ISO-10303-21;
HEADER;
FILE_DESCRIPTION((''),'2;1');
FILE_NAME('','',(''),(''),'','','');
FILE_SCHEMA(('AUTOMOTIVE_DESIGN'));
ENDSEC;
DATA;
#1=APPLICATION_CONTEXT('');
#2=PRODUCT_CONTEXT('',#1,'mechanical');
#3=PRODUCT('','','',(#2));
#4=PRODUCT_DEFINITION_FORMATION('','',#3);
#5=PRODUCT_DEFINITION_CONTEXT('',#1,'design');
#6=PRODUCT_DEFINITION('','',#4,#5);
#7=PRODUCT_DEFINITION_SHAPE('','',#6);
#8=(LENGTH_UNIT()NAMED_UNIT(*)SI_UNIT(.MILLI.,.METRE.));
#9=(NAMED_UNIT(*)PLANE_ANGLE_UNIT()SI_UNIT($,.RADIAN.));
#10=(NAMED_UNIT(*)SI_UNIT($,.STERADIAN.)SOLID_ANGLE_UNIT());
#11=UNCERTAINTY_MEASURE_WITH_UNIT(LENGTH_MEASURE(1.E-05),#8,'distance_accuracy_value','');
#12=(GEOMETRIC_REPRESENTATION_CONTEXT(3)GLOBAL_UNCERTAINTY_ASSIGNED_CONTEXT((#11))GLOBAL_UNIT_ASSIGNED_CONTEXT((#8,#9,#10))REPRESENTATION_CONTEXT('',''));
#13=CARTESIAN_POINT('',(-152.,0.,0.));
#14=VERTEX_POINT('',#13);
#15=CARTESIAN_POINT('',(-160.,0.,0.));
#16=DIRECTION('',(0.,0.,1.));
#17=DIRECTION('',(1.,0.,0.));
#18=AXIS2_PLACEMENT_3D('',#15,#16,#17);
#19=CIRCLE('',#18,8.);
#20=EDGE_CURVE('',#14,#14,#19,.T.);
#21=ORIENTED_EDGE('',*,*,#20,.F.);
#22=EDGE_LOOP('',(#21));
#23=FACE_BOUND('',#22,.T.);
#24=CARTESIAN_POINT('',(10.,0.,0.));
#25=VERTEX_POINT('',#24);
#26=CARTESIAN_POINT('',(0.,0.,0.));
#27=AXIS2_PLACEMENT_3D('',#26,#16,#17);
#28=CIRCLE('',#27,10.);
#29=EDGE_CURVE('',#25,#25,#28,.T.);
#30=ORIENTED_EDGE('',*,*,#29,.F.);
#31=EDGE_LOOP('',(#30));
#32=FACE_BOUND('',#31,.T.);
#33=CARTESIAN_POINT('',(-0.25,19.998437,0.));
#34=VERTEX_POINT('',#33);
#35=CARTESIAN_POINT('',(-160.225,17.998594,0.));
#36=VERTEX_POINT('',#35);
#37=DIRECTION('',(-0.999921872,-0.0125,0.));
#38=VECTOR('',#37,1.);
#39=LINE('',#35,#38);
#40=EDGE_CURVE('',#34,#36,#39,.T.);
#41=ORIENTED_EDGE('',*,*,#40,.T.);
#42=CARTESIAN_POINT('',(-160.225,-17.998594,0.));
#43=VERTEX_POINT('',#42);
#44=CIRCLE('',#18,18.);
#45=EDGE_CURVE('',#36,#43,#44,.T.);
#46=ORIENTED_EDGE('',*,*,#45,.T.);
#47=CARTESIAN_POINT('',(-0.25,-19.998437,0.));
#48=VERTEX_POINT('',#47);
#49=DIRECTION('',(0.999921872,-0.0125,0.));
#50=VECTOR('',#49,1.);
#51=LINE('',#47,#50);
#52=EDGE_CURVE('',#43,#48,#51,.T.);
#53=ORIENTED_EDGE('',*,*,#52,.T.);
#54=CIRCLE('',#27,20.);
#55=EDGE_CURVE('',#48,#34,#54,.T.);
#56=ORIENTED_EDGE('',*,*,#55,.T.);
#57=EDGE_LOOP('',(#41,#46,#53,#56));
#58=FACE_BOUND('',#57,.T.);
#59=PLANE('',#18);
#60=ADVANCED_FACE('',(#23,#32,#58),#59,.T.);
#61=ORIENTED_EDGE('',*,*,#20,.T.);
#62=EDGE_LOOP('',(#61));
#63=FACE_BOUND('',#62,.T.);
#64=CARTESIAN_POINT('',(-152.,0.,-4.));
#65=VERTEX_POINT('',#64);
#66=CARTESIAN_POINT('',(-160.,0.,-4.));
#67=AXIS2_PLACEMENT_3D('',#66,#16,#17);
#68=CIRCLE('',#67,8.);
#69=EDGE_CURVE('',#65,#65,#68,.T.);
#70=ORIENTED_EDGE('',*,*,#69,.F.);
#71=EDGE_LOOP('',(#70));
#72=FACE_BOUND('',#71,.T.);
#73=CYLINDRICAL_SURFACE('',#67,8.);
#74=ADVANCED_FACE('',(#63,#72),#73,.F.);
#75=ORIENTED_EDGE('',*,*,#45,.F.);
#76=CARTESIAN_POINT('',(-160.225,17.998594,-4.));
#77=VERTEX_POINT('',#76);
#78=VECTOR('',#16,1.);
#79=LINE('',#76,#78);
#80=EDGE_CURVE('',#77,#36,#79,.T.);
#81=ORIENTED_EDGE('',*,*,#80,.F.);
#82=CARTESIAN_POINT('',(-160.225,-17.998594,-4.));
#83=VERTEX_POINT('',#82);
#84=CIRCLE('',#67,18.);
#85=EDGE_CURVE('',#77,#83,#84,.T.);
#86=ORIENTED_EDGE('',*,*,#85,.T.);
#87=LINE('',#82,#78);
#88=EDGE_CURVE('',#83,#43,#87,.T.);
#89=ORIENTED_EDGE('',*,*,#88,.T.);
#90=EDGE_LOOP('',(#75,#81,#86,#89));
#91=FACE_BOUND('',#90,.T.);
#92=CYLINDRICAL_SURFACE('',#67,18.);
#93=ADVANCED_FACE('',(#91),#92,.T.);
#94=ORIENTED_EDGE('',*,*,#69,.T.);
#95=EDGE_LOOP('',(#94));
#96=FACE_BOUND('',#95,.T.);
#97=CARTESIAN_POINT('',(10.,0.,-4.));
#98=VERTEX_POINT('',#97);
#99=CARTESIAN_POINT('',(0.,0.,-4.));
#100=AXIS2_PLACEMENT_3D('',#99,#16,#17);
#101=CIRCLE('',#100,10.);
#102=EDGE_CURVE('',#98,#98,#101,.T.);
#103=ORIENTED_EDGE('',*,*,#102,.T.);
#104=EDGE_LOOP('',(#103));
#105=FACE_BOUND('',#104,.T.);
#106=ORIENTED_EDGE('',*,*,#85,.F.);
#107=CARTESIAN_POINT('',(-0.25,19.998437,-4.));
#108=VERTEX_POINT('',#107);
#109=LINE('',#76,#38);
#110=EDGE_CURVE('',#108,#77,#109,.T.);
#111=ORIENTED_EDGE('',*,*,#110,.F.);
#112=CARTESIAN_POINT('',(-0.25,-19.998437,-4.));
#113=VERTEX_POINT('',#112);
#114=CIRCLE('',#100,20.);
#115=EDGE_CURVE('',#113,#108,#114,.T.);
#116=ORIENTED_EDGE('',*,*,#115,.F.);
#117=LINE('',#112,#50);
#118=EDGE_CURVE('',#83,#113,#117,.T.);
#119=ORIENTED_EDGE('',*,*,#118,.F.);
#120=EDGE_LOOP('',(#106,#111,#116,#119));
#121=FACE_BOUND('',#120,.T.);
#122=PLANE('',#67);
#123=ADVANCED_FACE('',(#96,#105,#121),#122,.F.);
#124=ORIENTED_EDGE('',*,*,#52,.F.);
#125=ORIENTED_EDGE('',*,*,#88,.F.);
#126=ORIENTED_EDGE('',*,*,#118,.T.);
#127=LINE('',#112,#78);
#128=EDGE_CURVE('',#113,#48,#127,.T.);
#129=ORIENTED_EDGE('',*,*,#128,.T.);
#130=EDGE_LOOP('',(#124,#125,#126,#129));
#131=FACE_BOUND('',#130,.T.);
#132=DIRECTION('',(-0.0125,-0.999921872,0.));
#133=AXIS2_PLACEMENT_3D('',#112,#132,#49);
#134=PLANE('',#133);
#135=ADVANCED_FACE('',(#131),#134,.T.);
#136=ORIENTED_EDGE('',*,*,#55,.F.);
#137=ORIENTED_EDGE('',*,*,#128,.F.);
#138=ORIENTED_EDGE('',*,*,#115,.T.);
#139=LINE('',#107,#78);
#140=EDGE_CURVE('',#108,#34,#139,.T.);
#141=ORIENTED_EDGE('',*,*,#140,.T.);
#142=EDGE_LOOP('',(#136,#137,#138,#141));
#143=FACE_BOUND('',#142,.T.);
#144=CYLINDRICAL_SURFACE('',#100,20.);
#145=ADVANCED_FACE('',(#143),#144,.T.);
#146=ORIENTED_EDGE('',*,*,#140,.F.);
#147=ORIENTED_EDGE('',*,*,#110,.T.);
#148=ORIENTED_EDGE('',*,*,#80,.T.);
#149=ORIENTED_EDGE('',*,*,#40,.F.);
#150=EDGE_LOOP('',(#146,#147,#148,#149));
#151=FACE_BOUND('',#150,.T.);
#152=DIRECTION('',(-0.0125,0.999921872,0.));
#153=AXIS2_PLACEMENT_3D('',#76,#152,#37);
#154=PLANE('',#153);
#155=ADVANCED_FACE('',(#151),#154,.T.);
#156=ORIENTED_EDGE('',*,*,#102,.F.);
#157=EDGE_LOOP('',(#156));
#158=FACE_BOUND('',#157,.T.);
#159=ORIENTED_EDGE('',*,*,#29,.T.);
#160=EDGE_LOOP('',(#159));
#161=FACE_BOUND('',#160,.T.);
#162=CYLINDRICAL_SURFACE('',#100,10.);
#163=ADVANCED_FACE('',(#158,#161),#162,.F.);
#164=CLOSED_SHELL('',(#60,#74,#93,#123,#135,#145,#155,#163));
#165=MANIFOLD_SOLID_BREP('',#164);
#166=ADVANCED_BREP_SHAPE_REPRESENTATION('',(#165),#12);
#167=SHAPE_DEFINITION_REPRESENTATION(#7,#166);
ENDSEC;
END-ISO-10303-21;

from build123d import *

# Parameters (mm, degrees)
SKETCH_2_R             = 8
SKETCH_2_R_2           = 10
SM_BASE_FLANGE_1_DEPTH = 4


# Sheet-metal steps are written as plain solids
with BuildPart() as part:
    # Sketch 2 → Базовая кромка1 (new body)
    with BuildSketch(Plane.XY):
        with BuildLine():
            Line((-160.225, 17.998593695), (-0.25, 19.998437439))
            ThreePointArc((-0.25, 19.998437439), (20, 0), (-0.25, -19.998437439))
            Line((-0.25, -19.998437439), (-160.225, -17.998593695))
            ThreePointArc((-160.225, -17.998593695), (-178, 0), (-160.225, 17.998593695))
        make_face()
        with Locations((-160, 0)):
            Circle(SKETCH_2_R, mode=Mode.SUBTRACT)
        Circle(SKETCH_2_R_2, mode=Mode.SUBTRACT)
    extrude(amount=-SM_BASE_FLANGE_1_DEPTH)


solid = part.part
